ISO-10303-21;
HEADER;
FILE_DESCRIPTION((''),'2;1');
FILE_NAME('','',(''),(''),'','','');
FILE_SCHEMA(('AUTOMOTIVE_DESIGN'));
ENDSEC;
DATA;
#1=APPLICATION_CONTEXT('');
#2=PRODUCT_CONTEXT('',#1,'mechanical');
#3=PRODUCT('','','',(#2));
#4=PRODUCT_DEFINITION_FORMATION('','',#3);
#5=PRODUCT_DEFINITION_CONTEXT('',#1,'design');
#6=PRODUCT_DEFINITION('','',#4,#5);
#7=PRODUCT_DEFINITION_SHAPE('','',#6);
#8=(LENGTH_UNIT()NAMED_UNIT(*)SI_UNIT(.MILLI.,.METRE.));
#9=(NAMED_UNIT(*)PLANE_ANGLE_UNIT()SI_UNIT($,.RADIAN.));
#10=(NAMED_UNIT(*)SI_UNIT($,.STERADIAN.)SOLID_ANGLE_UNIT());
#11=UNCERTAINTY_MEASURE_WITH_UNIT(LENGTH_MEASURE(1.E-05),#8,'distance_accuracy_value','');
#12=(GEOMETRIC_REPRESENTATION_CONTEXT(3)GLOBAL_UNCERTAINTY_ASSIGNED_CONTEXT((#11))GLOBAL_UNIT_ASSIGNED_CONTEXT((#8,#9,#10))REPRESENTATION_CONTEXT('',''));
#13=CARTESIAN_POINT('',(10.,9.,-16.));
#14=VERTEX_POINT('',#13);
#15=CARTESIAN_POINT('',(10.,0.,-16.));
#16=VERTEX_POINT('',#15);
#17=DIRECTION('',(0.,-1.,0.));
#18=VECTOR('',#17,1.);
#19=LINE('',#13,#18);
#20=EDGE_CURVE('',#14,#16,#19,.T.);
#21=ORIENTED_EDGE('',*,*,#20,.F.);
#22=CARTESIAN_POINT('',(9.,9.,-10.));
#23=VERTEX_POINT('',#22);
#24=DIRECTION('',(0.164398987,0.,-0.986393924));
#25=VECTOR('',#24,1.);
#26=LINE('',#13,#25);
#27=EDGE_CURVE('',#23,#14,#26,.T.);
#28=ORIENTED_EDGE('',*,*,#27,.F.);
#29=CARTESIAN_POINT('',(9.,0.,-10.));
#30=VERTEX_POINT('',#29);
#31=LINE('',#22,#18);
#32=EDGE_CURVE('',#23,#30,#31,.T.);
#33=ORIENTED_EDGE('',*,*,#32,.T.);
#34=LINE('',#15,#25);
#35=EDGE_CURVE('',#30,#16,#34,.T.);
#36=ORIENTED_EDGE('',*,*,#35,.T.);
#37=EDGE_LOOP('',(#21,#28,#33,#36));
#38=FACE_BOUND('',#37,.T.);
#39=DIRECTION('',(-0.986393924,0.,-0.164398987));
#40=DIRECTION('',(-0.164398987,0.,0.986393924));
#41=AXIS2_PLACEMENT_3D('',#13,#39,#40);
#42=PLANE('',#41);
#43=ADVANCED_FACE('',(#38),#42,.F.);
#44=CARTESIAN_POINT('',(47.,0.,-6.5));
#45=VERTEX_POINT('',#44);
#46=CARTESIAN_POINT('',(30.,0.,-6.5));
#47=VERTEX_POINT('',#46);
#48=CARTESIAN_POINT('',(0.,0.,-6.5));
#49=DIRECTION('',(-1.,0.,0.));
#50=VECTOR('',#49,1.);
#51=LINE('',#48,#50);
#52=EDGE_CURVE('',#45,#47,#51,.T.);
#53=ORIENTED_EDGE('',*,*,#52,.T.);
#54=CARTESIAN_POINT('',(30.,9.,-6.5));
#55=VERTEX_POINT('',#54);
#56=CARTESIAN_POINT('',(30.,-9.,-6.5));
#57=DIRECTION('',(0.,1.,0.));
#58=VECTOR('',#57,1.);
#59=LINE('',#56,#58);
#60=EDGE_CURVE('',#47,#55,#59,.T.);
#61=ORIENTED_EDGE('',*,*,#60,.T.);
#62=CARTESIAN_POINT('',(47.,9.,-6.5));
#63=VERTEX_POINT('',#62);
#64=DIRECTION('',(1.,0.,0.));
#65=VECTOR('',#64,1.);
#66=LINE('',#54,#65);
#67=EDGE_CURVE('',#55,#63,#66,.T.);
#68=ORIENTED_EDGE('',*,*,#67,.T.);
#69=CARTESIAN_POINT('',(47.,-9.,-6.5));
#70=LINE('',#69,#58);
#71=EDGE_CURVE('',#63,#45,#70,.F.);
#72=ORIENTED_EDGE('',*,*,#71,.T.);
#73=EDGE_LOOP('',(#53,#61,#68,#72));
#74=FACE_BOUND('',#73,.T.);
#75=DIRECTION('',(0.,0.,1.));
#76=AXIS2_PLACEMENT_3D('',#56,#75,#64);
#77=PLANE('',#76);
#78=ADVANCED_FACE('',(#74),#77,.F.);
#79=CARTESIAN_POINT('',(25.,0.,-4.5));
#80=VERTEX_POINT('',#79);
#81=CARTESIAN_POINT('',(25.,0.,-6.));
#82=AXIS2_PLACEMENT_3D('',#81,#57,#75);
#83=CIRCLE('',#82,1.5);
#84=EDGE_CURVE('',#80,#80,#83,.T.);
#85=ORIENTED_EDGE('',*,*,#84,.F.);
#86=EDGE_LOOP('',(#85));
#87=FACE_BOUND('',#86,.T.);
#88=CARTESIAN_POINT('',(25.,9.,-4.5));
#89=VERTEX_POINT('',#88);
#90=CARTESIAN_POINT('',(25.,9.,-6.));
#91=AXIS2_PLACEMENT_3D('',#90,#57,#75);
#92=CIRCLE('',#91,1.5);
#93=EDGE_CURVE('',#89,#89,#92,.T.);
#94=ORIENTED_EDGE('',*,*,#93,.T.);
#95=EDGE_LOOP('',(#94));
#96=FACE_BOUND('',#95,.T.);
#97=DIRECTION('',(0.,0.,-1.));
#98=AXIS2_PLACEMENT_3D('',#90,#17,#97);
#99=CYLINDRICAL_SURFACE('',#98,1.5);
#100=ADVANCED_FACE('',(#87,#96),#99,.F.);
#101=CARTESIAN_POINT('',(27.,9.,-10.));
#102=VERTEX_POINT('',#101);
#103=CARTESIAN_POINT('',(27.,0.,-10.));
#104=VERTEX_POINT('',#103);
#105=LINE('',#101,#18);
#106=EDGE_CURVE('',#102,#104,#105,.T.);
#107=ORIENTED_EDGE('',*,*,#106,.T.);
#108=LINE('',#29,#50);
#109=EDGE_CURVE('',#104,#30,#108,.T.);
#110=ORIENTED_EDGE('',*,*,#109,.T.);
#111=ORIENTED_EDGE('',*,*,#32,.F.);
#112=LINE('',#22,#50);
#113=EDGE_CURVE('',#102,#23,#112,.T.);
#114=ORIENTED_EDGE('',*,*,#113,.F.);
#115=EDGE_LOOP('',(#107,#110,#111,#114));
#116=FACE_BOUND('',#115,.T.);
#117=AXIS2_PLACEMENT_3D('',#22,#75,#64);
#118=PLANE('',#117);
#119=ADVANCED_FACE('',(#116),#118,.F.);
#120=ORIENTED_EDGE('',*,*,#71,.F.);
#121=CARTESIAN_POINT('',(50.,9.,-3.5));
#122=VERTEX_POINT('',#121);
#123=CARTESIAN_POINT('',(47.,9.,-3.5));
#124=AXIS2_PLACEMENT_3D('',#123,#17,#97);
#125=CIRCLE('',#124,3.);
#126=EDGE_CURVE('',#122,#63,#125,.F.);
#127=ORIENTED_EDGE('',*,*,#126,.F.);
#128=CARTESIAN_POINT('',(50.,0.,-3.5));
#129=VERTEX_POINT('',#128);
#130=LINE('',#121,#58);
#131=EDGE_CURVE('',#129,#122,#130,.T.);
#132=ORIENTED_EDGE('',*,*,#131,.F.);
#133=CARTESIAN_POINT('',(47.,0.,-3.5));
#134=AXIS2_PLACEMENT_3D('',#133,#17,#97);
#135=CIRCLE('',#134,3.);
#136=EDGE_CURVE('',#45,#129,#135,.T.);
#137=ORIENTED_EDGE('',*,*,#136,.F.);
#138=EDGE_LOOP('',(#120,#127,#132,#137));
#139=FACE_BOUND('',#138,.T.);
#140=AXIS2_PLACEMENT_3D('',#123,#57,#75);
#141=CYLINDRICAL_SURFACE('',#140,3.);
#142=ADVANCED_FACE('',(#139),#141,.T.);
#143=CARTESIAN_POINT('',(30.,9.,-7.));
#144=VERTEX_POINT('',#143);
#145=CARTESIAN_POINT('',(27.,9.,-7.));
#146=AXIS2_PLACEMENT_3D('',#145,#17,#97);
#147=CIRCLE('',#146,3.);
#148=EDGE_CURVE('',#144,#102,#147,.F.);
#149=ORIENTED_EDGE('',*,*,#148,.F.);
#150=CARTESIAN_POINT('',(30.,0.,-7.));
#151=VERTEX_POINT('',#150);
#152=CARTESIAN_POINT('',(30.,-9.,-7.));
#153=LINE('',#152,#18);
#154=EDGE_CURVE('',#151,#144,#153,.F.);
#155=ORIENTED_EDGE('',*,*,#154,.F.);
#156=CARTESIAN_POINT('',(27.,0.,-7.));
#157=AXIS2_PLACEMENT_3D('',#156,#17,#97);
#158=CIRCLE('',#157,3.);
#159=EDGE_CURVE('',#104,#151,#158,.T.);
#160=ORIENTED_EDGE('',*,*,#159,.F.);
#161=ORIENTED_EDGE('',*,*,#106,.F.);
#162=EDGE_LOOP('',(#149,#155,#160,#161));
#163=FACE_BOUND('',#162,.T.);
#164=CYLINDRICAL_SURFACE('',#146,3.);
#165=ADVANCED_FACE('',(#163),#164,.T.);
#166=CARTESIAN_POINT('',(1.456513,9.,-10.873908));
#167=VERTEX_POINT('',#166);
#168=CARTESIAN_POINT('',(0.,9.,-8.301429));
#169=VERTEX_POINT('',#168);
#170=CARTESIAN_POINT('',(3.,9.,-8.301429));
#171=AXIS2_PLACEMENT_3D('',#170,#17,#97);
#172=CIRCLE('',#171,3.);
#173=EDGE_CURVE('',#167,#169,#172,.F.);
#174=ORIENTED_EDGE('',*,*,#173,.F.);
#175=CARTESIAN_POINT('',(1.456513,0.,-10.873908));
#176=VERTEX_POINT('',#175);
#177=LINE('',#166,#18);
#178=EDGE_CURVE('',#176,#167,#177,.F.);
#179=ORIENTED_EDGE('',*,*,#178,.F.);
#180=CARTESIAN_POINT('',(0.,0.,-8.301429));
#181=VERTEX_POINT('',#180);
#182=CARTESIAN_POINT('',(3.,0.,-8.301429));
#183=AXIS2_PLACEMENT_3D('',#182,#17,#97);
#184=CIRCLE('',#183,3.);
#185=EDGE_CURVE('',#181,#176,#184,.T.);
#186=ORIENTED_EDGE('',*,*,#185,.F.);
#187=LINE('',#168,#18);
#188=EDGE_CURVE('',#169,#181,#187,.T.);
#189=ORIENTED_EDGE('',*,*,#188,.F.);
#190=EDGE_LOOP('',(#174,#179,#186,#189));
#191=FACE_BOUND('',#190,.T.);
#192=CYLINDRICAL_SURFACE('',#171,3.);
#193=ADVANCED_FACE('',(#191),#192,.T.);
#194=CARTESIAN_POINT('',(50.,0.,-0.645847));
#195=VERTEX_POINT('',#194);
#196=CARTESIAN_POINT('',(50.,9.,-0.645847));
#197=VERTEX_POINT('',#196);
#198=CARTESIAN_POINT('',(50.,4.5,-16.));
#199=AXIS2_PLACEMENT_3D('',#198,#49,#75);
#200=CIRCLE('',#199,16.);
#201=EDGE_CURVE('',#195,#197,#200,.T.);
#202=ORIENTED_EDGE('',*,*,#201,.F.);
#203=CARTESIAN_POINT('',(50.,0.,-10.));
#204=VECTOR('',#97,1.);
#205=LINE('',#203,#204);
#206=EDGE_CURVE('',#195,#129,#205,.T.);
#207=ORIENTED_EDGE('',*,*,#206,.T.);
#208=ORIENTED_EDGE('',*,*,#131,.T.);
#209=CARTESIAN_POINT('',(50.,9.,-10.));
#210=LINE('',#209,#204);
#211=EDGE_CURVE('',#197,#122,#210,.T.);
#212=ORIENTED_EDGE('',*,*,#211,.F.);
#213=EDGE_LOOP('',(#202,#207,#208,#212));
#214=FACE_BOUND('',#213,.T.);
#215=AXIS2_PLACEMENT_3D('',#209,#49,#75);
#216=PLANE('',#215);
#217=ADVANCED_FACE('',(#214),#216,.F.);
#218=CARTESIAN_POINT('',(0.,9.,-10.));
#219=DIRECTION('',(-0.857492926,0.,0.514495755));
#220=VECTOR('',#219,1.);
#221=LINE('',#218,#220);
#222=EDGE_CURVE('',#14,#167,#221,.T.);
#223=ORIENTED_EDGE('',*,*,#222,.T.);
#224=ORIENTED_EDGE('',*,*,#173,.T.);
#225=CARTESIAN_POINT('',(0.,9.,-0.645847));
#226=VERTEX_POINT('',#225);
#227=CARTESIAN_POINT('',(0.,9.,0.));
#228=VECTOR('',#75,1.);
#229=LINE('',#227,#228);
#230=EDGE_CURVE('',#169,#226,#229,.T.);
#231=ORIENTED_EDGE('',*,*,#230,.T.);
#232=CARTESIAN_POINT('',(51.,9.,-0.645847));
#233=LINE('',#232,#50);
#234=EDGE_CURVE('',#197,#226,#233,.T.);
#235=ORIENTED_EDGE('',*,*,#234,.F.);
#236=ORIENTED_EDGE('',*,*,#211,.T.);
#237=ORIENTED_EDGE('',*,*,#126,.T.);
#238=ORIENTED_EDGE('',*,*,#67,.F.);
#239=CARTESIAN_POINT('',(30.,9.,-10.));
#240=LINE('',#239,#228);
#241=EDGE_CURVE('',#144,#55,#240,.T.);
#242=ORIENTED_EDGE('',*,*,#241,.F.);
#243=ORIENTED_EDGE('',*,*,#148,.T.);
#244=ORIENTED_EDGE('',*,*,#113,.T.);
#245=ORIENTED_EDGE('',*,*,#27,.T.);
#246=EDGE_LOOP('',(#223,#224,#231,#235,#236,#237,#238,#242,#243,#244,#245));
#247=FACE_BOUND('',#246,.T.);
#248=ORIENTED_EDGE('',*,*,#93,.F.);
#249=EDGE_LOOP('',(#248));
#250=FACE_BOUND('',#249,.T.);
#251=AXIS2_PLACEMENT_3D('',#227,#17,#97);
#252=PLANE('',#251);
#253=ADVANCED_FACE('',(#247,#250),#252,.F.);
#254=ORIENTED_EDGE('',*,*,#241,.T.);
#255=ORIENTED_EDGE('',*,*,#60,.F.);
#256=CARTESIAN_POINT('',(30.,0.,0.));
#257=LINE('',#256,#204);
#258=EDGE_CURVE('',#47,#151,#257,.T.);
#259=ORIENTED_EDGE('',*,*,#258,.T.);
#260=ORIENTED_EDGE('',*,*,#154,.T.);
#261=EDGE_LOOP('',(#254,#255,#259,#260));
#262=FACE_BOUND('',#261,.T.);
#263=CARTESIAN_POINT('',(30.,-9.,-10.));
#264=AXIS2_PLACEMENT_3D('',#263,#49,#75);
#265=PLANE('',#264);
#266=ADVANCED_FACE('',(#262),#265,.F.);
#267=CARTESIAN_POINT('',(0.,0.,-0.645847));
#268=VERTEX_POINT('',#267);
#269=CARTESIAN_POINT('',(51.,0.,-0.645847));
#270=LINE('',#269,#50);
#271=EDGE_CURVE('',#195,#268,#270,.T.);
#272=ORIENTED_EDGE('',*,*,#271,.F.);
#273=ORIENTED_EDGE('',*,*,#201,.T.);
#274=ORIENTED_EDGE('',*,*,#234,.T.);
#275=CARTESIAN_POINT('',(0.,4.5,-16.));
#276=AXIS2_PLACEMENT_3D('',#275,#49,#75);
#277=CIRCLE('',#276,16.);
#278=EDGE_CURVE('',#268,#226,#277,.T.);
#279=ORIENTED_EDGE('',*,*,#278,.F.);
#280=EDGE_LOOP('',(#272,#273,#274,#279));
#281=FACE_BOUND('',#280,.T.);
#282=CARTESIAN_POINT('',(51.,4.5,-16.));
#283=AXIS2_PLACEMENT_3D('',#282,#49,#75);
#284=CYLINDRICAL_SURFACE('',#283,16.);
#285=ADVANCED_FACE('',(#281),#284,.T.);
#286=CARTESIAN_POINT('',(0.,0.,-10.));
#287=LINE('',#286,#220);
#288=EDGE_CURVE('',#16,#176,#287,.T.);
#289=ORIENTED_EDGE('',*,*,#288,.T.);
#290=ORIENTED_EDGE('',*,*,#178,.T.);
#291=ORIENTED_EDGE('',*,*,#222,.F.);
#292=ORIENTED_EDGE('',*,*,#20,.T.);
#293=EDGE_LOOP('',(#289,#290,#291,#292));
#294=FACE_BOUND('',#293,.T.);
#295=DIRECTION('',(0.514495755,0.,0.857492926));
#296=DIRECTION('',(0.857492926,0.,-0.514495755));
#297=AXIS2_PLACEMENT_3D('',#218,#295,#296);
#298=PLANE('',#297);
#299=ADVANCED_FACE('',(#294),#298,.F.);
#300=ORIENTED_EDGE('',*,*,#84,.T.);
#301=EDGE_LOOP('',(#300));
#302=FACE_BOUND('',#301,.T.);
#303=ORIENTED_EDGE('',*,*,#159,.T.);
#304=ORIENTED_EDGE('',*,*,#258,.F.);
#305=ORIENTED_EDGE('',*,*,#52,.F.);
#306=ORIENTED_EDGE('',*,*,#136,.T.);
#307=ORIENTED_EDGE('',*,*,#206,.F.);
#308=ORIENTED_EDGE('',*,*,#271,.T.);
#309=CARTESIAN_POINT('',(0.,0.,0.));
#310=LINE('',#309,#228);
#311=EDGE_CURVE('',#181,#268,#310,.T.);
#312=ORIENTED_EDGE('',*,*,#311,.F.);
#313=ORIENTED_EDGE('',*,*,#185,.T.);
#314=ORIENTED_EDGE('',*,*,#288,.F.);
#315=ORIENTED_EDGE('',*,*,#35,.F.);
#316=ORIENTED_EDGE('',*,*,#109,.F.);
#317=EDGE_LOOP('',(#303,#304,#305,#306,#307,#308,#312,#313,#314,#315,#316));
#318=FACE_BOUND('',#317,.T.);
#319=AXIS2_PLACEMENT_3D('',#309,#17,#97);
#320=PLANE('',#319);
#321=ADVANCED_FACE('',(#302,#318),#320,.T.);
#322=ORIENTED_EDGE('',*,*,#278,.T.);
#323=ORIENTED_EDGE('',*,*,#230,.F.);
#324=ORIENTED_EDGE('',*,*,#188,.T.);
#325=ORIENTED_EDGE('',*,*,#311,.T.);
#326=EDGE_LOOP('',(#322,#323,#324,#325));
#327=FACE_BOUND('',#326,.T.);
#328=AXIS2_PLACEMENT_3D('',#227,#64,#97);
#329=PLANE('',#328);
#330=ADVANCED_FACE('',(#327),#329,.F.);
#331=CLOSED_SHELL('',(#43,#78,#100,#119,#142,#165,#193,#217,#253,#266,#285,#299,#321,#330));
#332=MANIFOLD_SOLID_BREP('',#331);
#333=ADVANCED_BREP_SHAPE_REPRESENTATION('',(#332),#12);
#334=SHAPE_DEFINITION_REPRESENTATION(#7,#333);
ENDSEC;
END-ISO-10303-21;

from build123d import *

# Parameters (mm, degrees)
CROQUIS1_R              = 1.5
SALIENTE_EXTRUIR1_DEPTH = 9
CROQUIS2_W              = 20
CROQUIS2_H              = 3.5
CORTAR_EXTRUIR1_DEPTH   = 18
REDONDEO1_R             = 3
CORTAR_EXTRUIR2_DEPTH   = 51


with BuildPart() as part:
    # Croquis1 → Saliente-Extruir1 (new body)
    with BuildSketch(Plane(origin=(0, 0, 0), x_dir=(1, 0, 0), z_dir=(0, 1, 0))):
        Polygon((0, 0), (0, 10), (10, 16), (9, 10), (50, 10), (50, 0), align=None)
        with Locations((25, 6)):
            Circle(CROQUIS1_R, mode=Mode.SUBTRACT)
    extrude(amount=SALIENTE_EXTRUIR1_DEPTH)

    # Croquis2 → Cortar-Extruir1 (cut)
    with BuildSketch(Plane(origin=(0, 9, 0), x_dir=(1, 0, 0), z_dir=(0, 1, 0))):
        with Locations((40, 8.25)):
            Rectangle(CROQUIS2_W, CROQUIS2_H)
    extrude(amount=-CORTAR_EXTRUIR1_DEPTH, mode=Mode.SUBTRACT)

    # Redondeo1
    redondeo1_edges = [part.edges().sort_by_distance(p)[0] for p in [
        (0, 4.5, -10),
        (50, 4.5, -6.5),
        (30, 4.5, -10),
    ]]
    fillet(redondeo1_edges, radius=REDONDEO1_R)

    # Croquis4 → Cortar-Extruir2 (cut)
    with BuildSketch(Plane.ZY):
        with BuildLine():
            Line((-0.645847467, 0), (0, 0))
            Line((0, 0), (0, 4.500000055))
            ThreePointArc((0, 4.500000055), (-0.162284875, 2.226944872), (-0.645847467, 0))
        make_face()
        with BuildLine():
            ThreePointArc((-0.645847467, 9), (-0.162284883, 6.773055182), (0, 4.500000055))
            Line((0, 4.500000055), (0, 9))
            Line((0, 9), (-0.645847467, 9))
        make_face()
    extrude(amount=-CORTAR_EXTRUIR2_DEPTH, mode=Mode.SUBTRACT)


solid = part.part
